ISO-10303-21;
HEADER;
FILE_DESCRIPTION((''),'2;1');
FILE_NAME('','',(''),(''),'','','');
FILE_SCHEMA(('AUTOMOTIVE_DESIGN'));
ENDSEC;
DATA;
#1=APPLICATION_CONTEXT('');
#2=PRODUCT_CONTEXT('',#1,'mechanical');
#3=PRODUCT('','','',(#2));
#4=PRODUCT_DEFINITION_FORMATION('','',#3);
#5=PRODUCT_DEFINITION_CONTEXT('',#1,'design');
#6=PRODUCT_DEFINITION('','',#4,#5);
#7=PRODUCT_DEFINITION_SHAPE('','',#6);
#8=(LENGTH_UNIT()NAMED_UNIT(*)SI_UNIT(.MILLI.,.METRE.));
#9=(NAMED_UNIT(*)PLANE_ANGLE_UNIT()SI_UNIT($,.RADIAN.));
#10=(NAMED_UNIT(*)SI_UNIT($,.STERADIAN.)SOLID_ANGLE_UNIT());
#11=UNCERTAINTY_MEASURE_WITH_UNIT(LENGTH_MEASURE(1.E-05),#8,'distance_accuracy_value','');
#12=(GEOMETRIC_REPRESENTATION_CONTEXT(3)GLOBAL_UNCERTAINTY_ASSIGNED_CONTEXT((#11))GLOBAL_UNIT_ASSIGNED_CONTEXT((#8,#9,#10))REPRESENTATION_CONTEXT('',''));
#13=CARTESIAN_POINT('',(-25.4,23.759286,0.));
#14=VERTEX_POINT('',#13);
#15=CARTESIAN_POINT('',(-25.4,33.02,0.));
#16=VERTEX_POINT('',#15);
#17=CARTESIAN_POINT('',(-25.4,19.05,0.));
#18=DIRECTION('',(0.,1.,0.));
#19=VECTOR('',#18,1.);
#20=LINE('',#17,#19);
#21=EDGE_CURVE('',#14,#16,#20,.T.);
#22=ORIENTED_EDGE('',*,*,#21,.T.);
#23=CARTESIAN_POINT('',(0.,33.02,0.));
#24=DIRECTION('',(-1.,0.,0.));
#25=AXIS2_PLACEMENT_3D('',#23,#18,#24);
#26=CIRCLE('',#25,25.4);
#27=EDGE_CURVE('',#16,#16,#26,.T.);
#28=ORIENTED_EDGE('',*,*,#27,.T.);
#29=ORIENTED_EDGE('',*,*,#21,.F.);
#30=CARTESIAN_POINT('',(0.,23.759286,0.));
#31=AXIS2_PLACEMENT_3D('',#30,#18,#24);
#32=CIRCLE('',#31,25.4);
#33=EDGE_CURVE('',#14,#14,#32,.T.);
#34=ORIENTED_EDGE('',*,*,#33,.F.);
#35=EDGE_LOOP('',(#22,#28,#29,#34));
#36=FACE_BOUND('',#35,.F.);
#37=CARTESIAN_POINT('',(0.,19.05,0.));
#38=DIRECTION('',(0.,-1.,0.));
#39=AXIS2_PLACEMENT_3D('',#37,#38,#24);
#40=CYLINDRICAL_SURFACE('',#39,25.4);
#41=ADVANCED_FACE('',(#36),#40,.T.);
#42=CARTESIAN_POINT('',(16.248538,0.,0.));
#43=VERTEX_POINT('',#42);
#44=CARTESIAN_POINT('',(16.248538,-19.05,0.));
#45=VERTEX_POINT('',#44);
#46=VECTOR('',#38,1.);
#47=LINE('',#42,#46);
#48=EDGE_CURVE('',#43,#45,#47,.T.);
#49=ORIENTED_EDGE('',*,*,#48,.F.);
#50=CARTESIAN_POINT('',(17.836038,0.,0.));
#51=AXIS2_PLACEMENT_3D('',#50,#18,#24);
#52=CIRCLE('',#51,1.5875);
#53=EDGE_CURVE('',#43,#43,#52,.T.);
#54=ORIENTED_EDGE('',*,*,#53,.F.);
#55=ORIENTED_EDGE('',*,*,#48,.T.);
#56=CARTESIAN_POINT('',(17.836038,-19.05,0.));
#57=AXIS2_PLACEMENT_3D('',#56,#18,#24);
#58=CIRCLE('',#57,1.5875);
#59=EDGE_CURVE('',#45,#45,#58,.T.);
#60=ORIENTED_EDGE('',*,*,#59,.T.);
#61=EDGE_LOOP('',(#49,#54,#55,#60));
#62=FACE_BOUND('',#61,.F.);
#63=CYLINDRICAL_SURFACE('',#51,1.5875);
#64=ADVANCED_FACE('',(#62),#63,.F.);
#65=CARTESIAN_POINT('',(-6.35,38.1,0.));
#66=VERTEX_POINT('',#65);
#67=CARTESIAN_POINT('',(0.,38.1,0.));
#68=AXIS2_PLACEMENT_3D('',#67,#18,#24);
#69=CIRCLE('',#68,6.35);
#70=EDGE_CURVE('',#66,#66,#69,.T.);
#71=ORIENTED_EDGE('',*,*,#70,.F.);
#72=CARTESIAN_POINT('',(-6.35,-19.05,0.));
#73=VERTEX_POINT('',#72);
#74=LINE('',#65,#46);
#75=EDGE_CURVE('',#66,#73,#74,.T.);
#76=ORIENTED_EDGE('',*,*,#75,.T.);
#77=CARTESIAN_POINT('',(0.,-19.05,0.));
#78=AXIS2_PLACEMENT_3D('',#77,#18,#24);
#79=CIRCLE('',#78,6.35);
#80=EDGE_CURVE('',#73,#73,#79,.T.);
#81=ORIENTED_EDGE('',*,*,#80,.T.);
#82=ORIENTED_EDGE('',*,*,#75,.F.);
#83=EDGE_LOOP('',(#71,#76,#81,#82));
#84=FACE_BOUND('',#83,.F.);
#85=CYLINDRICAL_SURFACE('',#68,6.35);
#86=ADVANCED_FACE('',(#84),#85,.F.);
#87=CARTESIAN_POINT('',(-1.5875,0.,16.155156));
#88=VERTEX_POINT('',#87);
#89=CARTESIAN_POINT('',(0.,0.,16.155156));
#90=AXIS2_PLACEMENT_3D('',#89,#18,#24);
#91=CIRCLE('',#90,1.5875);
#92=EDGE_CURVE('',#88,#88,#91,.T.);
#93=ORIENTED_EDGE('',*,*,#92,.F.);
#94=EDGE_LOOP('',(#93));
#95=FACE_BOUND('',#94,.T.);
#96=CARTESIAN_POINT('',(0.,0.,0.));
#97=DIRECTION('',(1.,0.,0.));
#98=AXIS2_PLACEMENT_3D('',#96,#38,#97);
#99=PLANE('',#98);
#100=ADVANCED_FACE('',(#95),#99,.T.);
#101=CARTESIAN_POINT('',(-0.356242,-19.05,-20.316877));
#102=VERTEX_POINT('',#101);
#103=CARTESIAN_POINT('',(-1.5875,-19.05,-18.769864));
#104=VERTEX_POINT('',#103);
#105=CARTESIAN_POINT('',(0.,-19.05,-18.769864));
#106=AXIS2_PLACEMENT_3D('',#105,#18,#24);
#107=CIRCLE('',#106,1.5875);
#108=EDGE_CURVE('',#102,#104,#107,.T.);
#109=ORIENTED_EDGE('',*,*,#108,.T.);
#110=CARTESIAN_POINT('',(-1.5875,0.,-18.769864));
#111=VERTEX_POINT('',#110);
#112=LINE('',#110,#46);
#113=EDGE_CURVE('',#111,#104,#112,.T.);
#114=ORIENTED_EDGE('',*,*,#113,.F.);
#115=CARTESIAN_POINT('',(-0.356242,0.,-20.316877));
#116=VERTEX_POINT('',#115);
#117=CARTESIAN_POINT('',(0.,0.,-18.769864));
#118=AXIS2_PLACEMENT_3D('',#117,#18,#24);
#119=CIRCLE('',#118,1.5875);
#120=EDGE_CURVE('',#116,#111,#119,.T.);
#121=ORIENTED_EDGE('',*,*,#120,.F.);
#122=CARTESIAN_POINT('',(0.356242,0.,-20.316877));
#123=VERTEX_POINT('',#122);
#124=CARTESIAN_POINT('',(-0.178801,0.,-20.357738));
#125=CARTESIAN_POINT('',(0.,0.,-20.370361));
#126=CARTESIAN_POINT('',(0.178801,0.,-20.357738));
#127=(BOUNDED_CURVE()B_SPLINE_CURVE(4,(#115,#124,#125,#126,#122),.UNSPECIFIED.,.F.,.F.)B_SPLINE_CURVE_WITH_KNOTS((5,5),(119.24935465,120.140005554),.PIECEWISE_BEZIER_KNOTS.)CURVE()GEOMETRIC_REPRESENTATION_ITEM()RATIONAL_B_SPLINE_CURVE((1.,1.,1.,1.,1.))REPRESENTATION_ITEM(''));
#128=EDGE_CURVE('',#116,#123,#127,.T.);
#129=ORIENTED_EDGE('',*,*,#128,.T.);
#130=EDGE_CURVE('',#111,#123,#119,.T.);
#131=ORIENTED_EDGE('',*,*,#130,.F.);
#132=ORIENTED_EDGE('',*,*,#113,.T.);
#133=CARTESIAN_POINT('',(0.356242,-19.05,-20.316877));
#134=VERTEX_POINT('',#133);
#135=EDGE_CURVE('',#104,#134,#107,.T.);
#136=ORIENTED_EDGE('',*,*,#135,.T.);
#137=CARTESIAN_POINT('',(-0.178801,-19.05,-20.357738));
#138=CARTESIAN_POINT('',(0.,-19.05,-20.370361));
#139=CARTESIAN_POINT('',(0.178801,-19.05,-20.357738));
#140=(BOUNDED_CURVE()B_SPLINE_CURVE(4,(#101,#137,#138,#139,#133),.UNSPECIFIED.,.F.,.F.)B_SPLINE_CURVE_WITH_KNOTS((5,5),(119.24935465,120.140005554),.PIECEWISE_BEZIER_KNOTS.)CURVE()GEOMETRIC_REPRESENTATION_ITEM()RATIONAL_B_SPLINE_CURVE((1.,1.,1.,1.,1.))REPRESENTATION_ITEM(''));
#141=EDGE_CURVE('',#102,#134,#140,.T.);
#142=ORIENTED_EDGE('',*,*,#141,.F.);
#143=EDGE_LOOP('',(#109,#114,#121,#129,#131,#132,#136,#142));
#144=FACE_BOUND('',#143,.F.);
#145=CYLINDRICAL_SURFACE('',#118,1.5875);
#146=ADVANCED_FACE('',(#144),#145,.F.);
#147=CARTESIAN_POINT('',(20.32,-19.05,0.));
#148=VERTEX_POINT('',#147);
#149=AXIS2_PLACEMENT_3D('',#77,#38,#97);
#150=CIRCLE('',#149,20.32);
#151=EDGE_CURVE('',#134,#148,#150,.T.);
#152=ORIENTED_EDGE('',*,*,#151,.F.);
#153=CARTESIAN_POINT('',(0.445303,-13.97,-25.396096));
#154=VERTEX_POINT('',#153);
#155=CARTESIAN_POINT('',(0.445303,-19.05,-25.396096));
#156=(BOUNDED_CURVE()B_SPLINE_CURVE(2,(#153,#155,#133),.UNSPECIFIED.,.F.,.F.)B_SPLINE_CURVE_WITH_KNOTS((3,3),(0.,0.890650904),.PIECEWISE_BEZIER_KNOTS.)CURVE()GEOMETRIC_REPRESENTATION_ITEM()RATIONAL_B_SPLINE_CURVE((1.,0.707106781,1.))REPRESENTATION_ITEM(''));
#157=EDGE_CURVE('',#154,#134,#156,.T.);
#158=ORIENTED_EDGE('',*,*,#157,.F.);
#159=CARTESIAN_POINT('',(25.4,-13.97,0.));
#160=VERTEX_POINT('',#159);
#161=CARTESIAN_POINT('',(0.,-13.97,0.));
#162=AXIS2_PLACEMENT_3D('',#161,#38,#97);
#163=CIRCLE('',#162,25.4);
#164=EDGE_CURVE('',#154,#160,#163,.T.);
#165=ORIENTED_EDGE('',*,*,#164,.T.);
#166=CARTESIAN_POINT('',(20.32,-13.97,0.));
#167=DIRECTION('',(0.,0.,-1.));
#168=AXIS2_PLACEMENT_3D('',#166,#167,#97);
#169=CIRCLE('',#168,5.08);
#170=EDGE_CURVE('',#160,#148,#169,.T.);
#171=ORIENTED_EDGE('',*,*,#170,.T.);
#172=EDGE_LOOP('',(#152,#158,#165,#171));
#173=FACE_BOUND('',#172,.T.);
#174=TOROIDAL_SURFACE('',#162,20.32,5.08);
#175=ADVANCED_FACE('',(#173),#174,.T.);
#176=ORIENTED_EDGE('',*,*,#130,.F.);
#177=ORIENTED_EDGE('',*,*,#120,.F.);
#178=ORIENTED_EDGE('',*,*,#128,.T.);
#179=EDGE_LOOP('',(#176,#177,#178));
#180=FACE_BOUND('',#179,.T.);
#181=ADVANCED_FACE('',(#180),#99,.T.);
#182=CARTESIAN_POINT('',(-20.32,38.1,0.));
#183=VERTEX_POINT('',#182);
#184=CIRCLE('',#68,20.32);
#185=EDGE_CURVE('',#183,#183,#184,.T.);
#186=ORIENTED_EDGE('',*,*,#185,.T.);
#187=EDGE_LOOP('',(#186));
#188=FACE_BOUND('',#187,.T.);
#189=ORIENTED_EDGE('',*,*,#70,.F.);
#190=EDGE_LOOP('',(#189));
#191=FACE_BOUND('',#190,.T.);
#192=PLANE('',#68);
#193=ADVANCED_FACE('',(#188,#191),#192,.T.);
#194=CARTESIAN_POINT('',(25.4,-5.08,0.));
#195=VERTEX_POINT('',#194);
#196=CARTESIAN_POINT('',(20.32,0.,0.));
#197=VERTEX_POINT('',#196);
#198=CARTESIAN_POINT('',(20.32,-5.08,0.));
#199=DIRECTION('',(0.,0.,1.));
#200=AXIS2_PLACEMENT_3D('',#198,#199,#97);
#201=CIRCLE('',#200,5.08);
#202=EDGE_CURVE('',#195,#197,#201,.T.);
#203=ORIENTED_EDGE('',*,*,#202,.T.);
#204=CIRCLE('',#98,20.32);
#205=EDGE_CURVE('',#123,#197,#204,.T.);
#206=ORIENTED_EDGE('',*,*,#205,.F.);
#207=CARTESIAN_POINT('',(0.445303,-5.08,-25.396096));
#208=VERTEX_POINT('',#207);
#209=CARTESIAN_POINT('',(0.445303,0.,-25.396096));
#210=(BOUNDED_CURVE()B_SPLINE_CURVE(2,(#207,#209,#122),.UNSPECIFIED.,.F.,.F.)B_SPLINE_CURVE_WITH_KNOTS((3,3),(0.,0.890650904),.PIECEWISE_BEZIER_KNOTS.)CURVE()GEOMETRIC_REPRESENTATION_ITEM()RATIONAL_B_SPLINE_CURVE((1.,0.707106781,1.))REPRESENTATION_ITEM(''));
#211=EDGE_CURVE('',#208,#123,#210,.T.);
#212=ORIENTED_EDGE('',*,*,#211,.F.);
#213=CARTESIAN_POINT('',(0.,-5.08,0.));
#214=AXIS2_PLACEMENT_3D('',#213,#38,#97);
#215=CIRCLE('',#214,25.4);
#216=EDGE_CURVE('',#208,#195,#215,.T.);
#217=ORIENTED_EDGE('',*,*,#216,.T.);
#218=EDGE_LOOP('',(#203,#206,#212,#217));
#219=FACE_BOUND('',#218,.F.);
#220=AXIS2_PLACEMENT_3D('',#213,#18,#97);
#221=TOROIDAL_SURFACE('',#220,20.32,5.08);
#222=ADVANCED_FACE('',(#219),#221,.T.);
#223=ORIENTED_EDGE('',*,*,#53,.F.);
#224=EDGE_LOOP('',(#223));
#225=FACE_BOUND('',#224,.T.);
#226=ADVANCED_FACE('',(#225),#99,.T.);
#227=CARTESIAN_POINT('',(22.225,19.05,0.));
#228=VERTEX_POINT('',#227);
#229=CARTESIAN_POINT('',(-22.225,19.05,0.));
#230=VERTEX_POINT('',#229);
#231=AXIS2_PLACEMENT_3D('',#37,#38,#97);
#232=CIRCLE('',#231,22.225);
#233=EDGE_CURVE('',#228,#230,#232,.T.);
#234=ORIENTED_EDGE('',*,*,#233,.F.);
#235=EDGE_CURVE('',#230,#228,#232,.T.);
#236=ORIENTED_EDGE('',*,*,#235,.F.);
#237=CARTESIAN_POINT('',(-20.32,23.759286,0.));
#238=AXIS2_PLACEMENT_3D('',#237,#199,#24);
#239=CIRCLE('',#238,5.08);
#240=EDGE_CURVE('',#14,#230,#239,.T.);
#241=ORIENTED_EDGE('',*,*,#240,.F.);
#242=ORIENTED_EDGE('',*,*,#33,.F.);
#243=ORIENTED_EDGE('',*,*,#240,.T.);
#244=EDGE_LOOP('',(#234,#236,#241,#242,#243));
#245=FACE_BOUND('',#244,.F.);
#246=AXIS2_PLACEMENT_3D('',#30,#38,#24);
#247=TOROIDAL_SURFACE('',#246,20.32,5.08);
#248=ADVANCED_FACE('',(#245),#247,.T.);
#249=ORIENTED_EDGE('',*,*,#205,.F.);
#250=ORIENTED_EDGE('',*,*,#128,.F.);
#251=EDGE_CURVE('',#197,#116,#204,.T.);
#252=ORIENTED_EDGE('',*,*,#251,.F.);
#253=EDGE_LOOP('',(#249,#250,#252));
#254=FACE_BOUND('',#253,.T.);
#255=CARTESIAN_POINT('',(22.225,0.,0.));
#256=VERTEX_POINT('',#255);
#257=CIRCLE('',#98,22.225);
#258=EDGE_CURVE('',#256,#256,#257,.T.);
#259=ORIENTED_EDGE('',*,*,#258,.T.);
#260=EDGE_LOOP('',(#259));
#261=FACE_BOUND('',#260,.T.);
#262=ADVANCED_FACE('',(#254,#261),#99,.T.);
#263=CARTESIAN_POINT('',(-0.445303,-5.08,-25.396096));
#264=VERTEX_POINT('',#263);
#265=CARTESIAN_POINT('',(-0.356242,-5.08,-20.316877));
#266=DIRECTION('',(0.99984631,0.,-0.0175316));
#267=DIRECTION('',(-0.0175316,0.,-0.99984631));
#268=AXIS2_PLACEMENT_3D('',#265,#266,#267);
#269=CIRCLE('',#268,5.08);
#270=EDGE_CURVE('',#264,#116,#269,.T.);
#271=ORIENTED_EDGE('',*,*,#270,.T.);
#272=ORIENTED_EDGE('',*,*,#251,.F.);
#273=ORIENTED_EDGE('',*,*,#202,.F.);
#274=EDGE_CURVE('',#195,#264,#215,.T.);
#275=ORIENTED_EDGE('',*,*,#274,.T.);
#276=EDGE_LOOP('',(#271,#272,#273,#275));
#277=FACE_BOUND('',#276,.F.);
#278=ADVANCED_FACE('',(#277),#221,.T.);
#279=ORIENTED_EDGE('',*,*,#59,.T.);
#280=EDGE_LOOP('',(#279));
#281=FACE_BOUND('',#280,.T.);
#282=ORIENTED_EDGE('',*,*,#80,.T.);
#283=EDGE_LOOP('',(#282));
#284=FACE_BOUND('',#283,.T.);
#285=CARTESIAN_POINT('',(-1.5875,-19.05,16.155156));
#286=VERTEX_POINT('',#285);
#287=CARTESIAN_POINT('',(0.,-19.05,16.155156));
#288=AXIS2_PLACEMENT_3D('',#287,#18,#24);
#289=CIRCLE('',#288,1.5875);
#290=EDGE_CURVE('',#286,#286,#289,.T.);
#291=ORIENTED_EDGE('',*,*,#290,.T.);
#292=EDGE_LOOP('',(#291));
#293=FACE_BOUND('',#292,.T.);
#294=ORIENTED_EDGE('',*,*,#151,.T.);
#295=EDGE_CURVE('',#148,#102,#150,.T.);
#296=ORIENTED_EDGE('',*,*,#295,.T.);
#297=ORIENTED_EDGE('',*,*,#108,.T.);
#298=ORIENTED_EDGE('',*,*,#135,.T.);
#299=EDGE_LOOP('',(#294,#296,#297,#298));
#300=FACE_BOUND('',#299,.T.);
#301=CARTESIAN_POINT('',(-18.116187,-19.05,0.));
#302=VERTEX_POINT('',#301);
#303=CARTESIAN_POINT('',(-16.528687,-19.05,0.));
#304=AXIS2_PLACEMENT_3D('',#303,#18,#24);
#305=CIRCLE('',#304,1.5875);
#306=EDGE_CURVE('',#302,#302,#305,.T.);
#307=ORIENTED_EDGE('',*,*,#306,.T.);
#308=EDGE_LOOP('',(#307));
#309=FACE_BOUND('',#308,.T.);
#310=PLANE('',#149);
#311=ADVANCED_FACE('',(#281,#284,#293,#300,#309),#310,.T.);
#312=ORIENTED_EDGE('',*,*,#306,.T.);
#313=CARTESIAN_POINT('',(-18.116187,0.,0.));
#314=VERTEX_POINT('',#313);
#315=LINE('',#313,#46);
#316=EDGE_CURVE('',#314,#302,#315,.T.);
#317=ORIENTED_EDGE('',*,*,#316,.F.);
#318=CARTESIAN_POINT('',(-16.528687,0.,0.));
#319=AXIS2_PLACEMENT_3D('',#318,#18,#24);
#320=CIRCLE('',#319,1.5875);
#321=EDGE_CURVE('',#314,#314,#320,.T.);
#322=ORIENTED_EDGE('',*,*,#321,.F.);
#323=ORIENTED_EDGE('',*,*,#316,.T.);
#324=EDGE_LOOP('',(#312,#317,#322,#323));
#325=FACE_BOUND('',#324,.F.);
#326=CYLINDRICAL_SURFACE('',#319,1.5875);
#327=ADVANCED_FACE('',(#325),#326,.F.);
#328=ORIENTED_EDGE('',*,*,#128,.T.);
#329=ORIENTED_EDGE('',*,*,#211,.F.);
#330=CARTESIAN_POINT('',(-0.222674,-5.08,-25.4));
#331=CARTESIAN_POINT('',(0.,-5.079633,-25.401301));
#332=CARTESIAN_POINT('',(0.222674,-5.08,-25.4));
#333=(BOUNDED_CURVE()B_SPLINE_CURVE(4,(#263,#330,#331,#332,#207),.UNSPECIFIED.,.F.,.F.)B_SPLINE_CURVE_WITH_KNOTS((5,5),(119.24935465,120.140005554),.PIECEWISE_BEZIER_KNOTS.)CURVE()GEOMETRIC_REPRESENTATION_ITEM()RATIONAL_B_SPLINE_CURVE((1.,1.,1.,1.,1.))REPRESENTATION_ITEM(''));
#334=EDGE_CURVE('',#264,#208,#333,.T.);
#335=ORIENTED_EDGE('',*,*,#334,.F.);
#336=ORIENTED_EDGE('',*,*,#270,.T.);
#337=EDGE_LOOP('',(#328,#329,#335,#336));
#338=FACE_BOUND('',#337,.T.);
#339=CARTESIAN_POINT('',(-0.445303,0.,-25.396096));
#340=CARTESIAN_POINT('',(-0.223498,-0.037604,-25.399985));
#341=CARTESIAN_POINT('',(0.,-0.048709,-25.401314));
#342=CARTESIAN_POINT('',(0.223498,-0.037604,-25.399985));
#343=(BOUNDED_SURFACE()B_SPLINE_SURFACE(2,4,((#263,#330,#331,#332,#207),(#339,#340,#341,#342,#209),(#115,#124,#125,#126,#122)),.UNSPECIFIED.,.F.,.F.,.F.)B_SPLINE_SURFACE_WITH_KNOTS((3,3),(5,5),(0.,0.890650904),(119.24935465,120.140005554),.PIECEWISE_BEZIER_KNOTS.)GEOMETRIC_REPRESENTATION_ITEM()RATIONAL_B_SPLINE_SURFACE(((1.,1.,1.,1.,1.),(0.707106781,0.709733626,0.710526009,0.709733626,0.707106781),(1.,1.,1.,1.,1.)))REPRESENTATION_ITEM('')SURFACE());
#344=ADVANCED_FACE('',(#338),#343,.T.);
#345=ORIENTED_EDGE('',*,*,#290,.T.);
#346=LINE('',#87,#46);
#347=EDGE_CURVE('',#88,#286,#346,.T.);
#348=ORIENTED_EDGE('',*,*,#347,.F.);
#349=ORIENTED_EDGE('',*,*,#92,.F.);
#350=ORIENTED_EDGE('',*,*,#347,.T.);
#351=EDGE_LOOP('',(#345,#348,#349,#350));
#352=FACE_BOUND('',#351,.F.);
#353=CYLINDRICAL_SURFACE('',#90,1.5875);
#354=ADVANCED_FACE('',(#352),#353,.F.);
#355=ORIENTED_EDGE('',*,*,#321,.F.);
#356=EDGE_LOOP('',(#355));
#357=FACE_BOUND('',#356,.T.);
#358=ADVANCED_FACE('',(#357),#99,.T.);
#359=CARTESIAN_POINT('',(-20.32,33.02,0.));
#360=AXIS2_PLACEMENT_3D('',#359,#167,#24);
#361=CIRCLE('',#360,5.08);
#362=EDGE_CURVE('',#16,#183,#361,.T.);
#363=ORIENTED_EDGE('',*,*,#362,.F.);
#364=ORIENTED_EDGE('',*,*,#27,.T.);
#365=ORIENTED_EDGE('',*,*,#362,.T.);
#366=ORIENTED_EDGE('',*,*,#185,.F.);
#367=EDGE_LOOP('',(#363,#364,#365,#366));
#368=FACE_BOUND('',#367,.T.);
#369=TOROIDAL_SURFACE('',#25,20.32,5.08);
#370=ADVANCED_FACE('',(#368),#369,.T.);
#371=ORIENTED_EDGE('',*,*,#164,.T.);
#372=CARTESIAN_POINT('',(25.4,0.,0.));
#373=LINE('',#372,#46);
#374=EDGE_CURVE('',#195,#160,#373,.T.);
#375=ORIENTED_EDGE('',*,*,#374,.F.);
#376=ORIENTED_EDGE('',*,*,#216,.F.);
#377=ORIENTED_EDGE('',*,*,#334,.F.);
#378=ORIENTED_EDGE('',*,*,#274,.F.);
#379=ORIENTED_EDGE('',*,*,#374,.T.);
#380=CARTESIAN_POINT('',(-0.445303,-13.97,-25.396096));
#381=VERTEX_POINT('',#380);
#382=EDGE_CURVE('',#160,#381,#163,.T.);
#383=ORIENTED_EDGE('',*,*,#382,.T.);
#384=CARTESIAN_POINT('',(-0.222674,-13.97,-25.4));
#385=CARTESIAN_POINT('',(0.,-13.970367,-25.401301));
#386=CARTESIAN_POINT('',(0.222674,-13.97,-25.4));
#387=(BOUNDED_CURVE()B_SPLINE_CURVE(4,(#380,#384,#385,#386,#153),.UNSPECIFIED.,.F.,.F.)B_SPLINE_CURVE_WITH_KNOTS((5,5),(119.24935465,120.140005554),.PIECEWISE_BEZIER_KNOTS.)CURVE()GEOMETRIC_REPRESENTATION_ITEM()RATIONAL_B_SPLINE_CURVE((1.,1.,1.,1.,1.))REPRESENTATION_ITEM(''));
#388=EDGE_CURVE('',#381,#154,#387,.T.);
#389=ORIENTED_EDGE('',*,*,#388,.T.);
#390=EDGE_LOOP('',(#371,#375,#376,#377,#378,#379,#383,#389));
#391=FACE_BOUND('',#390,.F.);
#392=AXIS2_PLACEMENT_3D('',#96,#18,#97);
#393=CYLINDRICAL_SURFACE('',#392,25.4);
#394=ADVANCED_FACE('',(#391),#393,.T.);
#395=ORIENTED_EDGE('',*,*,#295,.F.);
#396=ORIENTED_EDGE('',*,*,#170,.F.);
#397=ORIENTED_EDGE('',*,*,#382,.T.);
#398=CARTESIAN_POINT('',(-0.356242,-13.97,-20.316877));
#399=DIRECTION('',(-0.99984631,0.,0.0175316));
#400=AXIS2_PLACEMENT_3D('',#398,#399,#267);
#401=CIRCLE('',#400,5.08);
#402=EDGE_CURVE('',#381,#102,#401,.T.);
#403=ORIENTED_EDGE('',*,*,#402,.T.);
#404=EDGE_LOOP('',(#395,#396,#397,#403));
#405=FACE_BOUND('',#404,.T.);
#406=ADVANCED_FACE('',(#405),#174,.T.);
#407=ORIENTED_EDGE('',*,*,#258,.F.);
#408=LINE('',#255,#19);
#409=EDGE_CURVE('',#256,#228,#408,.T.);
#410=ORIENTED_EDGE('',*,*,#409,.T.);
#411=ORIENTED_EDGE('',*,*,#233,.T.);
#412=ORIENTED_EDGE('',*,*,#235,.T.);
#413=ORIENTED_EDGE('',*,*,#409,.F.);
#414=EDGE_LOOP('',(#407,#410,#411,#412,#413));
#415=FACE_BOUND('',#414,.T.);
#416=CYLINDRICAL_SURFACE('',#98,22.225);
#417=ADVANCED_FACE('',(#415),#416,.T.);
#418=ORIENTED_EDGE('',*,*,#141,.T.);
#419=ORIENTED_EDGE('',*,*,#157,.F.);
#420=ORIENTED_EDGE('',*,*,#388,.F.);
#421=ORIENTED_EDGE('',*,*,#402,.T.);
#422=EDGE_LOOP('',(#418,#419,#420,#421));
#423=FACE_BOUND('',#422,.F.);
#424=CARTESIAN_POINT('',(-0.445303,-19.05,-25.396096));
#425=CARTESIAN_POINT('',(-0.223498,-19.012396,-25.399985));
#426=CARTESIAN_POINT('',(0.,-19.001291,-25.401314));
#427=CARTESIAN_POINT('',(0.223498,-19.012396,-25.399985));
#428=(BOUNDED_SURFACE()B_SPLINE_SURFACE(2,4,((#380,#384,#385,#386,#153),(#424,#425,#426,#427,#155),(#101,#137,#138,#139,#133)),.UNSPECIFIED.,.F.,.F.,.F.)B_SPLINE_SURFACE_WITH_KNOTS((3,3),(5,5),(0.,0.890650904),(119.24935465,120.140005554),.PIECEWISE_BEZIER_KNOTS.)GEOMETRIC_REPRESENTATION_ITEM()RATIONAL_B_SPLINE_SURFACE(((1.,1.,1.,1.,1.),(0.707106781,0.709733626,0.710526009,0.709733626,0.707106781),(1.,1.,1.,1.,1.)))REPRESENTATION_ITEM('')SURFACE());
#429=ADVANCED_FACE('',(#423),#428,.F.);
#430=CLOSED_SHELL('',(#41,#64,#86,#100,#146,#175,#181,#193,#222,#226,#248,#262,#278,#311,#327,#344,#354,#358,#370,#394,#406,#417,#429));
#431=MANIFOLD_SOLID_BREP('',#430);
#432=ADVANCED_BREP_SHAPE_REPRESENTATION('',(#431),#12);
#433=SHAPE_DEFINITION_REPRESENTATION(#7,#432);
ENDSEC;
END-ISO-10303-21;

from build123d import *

# Parameters (mm, degrees)
F0_R      = 25.4
F1_DEPTH  = 19.05
F2_R      = 1.5875
F3_DEPTH  = 44.45
F4_R      = 5.08
F5_R      = 22.225
F6_DEPTH  = 19.05
F7_R      = 25.4
F8_DEPTH  = 19.05
F10_R     = 6.35
F11_DEPTH = 57.1510001


# Not quite as in the source:
# - a fillet or chamfer that OpenCascade refuses, or shapes differently, is made with other operations: its cross-section is extruded or revolved along the edge and cut away or added


with BuildPart() as f1:
    # F0 (on Front) → F1 (new body)
    with BuildSketch(Plane.XZ):
        Circle(F0_R)
    extrude(amount=F1_DEPTH)

    # F2 (on face) → F3 (cut)
    with BuildSketch(Plane(origin=(0, 0, 0), x_dir=(-1, 0, 0), z_dir=(0, 1, 0))):
        with Locations((0, 16.1551559669)):
            Circle(F2_R)
        with Locations((16.5286865403, 0)):
            Circle(F2_R)
        with Locations((0, -18.7698644697)):
            Circle(F2_R)
        with Locations((-17.8360380362, 0)):
            Circle(F2_R)
    extrude(amount=-F3_DEPTH, mode=Mode.SUBTRACT)

    # F4
    f4_edges = [f1.edges().sort_by_distance(p)[0] for p in [
        (-25.4, 0, 0),
        (-25.4, -19.05, 0),
    ]]
    fillet(f4_edges, radius=F4_R)

    # F5 (on Front) → F6 (join)
    with BuildSketch(Plane.XZ):
        Circle(F5_R)
    extrude(amount=-F6_DEPTH)

    # F7 (on face) → F8 (join)
    with BuildSketch(Plane(origin=(0, 19.05, 0), x_dir=(-1, 0, 0), z_dir=(0, 1, 0))):
        Circle(F7_R)
    extrude(amount=F8_DEPTH)

    # F9: fillet of radius 5.08 on 2 edges, made by hand

    # F9_s1 → F9_t2 (revolve, cut)
    with BuildSketch(Plane.XY):
        with BuildLine():
            ThreePointArc((-25.4, 33.02), (-23.9121024484, 36.6121024484), (-20.32, 38.1))
            Line((-20.32, 38.1), (-25.4, 38.1))
            Line((-25.4, 38.1), (-25.4, 33.02))
        make_face()
    revolve(axis=Axis((0, 38.1, 0), (0, 1, 0)), mode=Mode.SUBTRACT)

    # F9_s3 → F9_t4 (revolve, cut)
    with BuildSketch(Plane.XY):
        with BuildLine():
            ThreePointArc((-25.4, 23.7592860393), (-24.5321134838, 20.9194797079), (-22.225, 19.05))
            Line((-22.225, 19.05), (-25.4, 19.05))
            Line((-25.4, 19.05), (-25.4, 23.7592860393))
        make_face()
    revolve(axis=Axis((0, 19.05, 0), (0, 1, 0)), mode=Mode.SUBTRACT)

    # F10 (on face) → F11 (cut, through all)
    with BuildSketch(Plane(origin=(0, 38.1, 0), x_dir=(-1, 0, 0), z_dir=(0, 1, 0))):
        Circle(F10_R)
    extrude(amount=-F11_DEPTH, mode=Mode.SUBTRACT)


solid = f1.part
